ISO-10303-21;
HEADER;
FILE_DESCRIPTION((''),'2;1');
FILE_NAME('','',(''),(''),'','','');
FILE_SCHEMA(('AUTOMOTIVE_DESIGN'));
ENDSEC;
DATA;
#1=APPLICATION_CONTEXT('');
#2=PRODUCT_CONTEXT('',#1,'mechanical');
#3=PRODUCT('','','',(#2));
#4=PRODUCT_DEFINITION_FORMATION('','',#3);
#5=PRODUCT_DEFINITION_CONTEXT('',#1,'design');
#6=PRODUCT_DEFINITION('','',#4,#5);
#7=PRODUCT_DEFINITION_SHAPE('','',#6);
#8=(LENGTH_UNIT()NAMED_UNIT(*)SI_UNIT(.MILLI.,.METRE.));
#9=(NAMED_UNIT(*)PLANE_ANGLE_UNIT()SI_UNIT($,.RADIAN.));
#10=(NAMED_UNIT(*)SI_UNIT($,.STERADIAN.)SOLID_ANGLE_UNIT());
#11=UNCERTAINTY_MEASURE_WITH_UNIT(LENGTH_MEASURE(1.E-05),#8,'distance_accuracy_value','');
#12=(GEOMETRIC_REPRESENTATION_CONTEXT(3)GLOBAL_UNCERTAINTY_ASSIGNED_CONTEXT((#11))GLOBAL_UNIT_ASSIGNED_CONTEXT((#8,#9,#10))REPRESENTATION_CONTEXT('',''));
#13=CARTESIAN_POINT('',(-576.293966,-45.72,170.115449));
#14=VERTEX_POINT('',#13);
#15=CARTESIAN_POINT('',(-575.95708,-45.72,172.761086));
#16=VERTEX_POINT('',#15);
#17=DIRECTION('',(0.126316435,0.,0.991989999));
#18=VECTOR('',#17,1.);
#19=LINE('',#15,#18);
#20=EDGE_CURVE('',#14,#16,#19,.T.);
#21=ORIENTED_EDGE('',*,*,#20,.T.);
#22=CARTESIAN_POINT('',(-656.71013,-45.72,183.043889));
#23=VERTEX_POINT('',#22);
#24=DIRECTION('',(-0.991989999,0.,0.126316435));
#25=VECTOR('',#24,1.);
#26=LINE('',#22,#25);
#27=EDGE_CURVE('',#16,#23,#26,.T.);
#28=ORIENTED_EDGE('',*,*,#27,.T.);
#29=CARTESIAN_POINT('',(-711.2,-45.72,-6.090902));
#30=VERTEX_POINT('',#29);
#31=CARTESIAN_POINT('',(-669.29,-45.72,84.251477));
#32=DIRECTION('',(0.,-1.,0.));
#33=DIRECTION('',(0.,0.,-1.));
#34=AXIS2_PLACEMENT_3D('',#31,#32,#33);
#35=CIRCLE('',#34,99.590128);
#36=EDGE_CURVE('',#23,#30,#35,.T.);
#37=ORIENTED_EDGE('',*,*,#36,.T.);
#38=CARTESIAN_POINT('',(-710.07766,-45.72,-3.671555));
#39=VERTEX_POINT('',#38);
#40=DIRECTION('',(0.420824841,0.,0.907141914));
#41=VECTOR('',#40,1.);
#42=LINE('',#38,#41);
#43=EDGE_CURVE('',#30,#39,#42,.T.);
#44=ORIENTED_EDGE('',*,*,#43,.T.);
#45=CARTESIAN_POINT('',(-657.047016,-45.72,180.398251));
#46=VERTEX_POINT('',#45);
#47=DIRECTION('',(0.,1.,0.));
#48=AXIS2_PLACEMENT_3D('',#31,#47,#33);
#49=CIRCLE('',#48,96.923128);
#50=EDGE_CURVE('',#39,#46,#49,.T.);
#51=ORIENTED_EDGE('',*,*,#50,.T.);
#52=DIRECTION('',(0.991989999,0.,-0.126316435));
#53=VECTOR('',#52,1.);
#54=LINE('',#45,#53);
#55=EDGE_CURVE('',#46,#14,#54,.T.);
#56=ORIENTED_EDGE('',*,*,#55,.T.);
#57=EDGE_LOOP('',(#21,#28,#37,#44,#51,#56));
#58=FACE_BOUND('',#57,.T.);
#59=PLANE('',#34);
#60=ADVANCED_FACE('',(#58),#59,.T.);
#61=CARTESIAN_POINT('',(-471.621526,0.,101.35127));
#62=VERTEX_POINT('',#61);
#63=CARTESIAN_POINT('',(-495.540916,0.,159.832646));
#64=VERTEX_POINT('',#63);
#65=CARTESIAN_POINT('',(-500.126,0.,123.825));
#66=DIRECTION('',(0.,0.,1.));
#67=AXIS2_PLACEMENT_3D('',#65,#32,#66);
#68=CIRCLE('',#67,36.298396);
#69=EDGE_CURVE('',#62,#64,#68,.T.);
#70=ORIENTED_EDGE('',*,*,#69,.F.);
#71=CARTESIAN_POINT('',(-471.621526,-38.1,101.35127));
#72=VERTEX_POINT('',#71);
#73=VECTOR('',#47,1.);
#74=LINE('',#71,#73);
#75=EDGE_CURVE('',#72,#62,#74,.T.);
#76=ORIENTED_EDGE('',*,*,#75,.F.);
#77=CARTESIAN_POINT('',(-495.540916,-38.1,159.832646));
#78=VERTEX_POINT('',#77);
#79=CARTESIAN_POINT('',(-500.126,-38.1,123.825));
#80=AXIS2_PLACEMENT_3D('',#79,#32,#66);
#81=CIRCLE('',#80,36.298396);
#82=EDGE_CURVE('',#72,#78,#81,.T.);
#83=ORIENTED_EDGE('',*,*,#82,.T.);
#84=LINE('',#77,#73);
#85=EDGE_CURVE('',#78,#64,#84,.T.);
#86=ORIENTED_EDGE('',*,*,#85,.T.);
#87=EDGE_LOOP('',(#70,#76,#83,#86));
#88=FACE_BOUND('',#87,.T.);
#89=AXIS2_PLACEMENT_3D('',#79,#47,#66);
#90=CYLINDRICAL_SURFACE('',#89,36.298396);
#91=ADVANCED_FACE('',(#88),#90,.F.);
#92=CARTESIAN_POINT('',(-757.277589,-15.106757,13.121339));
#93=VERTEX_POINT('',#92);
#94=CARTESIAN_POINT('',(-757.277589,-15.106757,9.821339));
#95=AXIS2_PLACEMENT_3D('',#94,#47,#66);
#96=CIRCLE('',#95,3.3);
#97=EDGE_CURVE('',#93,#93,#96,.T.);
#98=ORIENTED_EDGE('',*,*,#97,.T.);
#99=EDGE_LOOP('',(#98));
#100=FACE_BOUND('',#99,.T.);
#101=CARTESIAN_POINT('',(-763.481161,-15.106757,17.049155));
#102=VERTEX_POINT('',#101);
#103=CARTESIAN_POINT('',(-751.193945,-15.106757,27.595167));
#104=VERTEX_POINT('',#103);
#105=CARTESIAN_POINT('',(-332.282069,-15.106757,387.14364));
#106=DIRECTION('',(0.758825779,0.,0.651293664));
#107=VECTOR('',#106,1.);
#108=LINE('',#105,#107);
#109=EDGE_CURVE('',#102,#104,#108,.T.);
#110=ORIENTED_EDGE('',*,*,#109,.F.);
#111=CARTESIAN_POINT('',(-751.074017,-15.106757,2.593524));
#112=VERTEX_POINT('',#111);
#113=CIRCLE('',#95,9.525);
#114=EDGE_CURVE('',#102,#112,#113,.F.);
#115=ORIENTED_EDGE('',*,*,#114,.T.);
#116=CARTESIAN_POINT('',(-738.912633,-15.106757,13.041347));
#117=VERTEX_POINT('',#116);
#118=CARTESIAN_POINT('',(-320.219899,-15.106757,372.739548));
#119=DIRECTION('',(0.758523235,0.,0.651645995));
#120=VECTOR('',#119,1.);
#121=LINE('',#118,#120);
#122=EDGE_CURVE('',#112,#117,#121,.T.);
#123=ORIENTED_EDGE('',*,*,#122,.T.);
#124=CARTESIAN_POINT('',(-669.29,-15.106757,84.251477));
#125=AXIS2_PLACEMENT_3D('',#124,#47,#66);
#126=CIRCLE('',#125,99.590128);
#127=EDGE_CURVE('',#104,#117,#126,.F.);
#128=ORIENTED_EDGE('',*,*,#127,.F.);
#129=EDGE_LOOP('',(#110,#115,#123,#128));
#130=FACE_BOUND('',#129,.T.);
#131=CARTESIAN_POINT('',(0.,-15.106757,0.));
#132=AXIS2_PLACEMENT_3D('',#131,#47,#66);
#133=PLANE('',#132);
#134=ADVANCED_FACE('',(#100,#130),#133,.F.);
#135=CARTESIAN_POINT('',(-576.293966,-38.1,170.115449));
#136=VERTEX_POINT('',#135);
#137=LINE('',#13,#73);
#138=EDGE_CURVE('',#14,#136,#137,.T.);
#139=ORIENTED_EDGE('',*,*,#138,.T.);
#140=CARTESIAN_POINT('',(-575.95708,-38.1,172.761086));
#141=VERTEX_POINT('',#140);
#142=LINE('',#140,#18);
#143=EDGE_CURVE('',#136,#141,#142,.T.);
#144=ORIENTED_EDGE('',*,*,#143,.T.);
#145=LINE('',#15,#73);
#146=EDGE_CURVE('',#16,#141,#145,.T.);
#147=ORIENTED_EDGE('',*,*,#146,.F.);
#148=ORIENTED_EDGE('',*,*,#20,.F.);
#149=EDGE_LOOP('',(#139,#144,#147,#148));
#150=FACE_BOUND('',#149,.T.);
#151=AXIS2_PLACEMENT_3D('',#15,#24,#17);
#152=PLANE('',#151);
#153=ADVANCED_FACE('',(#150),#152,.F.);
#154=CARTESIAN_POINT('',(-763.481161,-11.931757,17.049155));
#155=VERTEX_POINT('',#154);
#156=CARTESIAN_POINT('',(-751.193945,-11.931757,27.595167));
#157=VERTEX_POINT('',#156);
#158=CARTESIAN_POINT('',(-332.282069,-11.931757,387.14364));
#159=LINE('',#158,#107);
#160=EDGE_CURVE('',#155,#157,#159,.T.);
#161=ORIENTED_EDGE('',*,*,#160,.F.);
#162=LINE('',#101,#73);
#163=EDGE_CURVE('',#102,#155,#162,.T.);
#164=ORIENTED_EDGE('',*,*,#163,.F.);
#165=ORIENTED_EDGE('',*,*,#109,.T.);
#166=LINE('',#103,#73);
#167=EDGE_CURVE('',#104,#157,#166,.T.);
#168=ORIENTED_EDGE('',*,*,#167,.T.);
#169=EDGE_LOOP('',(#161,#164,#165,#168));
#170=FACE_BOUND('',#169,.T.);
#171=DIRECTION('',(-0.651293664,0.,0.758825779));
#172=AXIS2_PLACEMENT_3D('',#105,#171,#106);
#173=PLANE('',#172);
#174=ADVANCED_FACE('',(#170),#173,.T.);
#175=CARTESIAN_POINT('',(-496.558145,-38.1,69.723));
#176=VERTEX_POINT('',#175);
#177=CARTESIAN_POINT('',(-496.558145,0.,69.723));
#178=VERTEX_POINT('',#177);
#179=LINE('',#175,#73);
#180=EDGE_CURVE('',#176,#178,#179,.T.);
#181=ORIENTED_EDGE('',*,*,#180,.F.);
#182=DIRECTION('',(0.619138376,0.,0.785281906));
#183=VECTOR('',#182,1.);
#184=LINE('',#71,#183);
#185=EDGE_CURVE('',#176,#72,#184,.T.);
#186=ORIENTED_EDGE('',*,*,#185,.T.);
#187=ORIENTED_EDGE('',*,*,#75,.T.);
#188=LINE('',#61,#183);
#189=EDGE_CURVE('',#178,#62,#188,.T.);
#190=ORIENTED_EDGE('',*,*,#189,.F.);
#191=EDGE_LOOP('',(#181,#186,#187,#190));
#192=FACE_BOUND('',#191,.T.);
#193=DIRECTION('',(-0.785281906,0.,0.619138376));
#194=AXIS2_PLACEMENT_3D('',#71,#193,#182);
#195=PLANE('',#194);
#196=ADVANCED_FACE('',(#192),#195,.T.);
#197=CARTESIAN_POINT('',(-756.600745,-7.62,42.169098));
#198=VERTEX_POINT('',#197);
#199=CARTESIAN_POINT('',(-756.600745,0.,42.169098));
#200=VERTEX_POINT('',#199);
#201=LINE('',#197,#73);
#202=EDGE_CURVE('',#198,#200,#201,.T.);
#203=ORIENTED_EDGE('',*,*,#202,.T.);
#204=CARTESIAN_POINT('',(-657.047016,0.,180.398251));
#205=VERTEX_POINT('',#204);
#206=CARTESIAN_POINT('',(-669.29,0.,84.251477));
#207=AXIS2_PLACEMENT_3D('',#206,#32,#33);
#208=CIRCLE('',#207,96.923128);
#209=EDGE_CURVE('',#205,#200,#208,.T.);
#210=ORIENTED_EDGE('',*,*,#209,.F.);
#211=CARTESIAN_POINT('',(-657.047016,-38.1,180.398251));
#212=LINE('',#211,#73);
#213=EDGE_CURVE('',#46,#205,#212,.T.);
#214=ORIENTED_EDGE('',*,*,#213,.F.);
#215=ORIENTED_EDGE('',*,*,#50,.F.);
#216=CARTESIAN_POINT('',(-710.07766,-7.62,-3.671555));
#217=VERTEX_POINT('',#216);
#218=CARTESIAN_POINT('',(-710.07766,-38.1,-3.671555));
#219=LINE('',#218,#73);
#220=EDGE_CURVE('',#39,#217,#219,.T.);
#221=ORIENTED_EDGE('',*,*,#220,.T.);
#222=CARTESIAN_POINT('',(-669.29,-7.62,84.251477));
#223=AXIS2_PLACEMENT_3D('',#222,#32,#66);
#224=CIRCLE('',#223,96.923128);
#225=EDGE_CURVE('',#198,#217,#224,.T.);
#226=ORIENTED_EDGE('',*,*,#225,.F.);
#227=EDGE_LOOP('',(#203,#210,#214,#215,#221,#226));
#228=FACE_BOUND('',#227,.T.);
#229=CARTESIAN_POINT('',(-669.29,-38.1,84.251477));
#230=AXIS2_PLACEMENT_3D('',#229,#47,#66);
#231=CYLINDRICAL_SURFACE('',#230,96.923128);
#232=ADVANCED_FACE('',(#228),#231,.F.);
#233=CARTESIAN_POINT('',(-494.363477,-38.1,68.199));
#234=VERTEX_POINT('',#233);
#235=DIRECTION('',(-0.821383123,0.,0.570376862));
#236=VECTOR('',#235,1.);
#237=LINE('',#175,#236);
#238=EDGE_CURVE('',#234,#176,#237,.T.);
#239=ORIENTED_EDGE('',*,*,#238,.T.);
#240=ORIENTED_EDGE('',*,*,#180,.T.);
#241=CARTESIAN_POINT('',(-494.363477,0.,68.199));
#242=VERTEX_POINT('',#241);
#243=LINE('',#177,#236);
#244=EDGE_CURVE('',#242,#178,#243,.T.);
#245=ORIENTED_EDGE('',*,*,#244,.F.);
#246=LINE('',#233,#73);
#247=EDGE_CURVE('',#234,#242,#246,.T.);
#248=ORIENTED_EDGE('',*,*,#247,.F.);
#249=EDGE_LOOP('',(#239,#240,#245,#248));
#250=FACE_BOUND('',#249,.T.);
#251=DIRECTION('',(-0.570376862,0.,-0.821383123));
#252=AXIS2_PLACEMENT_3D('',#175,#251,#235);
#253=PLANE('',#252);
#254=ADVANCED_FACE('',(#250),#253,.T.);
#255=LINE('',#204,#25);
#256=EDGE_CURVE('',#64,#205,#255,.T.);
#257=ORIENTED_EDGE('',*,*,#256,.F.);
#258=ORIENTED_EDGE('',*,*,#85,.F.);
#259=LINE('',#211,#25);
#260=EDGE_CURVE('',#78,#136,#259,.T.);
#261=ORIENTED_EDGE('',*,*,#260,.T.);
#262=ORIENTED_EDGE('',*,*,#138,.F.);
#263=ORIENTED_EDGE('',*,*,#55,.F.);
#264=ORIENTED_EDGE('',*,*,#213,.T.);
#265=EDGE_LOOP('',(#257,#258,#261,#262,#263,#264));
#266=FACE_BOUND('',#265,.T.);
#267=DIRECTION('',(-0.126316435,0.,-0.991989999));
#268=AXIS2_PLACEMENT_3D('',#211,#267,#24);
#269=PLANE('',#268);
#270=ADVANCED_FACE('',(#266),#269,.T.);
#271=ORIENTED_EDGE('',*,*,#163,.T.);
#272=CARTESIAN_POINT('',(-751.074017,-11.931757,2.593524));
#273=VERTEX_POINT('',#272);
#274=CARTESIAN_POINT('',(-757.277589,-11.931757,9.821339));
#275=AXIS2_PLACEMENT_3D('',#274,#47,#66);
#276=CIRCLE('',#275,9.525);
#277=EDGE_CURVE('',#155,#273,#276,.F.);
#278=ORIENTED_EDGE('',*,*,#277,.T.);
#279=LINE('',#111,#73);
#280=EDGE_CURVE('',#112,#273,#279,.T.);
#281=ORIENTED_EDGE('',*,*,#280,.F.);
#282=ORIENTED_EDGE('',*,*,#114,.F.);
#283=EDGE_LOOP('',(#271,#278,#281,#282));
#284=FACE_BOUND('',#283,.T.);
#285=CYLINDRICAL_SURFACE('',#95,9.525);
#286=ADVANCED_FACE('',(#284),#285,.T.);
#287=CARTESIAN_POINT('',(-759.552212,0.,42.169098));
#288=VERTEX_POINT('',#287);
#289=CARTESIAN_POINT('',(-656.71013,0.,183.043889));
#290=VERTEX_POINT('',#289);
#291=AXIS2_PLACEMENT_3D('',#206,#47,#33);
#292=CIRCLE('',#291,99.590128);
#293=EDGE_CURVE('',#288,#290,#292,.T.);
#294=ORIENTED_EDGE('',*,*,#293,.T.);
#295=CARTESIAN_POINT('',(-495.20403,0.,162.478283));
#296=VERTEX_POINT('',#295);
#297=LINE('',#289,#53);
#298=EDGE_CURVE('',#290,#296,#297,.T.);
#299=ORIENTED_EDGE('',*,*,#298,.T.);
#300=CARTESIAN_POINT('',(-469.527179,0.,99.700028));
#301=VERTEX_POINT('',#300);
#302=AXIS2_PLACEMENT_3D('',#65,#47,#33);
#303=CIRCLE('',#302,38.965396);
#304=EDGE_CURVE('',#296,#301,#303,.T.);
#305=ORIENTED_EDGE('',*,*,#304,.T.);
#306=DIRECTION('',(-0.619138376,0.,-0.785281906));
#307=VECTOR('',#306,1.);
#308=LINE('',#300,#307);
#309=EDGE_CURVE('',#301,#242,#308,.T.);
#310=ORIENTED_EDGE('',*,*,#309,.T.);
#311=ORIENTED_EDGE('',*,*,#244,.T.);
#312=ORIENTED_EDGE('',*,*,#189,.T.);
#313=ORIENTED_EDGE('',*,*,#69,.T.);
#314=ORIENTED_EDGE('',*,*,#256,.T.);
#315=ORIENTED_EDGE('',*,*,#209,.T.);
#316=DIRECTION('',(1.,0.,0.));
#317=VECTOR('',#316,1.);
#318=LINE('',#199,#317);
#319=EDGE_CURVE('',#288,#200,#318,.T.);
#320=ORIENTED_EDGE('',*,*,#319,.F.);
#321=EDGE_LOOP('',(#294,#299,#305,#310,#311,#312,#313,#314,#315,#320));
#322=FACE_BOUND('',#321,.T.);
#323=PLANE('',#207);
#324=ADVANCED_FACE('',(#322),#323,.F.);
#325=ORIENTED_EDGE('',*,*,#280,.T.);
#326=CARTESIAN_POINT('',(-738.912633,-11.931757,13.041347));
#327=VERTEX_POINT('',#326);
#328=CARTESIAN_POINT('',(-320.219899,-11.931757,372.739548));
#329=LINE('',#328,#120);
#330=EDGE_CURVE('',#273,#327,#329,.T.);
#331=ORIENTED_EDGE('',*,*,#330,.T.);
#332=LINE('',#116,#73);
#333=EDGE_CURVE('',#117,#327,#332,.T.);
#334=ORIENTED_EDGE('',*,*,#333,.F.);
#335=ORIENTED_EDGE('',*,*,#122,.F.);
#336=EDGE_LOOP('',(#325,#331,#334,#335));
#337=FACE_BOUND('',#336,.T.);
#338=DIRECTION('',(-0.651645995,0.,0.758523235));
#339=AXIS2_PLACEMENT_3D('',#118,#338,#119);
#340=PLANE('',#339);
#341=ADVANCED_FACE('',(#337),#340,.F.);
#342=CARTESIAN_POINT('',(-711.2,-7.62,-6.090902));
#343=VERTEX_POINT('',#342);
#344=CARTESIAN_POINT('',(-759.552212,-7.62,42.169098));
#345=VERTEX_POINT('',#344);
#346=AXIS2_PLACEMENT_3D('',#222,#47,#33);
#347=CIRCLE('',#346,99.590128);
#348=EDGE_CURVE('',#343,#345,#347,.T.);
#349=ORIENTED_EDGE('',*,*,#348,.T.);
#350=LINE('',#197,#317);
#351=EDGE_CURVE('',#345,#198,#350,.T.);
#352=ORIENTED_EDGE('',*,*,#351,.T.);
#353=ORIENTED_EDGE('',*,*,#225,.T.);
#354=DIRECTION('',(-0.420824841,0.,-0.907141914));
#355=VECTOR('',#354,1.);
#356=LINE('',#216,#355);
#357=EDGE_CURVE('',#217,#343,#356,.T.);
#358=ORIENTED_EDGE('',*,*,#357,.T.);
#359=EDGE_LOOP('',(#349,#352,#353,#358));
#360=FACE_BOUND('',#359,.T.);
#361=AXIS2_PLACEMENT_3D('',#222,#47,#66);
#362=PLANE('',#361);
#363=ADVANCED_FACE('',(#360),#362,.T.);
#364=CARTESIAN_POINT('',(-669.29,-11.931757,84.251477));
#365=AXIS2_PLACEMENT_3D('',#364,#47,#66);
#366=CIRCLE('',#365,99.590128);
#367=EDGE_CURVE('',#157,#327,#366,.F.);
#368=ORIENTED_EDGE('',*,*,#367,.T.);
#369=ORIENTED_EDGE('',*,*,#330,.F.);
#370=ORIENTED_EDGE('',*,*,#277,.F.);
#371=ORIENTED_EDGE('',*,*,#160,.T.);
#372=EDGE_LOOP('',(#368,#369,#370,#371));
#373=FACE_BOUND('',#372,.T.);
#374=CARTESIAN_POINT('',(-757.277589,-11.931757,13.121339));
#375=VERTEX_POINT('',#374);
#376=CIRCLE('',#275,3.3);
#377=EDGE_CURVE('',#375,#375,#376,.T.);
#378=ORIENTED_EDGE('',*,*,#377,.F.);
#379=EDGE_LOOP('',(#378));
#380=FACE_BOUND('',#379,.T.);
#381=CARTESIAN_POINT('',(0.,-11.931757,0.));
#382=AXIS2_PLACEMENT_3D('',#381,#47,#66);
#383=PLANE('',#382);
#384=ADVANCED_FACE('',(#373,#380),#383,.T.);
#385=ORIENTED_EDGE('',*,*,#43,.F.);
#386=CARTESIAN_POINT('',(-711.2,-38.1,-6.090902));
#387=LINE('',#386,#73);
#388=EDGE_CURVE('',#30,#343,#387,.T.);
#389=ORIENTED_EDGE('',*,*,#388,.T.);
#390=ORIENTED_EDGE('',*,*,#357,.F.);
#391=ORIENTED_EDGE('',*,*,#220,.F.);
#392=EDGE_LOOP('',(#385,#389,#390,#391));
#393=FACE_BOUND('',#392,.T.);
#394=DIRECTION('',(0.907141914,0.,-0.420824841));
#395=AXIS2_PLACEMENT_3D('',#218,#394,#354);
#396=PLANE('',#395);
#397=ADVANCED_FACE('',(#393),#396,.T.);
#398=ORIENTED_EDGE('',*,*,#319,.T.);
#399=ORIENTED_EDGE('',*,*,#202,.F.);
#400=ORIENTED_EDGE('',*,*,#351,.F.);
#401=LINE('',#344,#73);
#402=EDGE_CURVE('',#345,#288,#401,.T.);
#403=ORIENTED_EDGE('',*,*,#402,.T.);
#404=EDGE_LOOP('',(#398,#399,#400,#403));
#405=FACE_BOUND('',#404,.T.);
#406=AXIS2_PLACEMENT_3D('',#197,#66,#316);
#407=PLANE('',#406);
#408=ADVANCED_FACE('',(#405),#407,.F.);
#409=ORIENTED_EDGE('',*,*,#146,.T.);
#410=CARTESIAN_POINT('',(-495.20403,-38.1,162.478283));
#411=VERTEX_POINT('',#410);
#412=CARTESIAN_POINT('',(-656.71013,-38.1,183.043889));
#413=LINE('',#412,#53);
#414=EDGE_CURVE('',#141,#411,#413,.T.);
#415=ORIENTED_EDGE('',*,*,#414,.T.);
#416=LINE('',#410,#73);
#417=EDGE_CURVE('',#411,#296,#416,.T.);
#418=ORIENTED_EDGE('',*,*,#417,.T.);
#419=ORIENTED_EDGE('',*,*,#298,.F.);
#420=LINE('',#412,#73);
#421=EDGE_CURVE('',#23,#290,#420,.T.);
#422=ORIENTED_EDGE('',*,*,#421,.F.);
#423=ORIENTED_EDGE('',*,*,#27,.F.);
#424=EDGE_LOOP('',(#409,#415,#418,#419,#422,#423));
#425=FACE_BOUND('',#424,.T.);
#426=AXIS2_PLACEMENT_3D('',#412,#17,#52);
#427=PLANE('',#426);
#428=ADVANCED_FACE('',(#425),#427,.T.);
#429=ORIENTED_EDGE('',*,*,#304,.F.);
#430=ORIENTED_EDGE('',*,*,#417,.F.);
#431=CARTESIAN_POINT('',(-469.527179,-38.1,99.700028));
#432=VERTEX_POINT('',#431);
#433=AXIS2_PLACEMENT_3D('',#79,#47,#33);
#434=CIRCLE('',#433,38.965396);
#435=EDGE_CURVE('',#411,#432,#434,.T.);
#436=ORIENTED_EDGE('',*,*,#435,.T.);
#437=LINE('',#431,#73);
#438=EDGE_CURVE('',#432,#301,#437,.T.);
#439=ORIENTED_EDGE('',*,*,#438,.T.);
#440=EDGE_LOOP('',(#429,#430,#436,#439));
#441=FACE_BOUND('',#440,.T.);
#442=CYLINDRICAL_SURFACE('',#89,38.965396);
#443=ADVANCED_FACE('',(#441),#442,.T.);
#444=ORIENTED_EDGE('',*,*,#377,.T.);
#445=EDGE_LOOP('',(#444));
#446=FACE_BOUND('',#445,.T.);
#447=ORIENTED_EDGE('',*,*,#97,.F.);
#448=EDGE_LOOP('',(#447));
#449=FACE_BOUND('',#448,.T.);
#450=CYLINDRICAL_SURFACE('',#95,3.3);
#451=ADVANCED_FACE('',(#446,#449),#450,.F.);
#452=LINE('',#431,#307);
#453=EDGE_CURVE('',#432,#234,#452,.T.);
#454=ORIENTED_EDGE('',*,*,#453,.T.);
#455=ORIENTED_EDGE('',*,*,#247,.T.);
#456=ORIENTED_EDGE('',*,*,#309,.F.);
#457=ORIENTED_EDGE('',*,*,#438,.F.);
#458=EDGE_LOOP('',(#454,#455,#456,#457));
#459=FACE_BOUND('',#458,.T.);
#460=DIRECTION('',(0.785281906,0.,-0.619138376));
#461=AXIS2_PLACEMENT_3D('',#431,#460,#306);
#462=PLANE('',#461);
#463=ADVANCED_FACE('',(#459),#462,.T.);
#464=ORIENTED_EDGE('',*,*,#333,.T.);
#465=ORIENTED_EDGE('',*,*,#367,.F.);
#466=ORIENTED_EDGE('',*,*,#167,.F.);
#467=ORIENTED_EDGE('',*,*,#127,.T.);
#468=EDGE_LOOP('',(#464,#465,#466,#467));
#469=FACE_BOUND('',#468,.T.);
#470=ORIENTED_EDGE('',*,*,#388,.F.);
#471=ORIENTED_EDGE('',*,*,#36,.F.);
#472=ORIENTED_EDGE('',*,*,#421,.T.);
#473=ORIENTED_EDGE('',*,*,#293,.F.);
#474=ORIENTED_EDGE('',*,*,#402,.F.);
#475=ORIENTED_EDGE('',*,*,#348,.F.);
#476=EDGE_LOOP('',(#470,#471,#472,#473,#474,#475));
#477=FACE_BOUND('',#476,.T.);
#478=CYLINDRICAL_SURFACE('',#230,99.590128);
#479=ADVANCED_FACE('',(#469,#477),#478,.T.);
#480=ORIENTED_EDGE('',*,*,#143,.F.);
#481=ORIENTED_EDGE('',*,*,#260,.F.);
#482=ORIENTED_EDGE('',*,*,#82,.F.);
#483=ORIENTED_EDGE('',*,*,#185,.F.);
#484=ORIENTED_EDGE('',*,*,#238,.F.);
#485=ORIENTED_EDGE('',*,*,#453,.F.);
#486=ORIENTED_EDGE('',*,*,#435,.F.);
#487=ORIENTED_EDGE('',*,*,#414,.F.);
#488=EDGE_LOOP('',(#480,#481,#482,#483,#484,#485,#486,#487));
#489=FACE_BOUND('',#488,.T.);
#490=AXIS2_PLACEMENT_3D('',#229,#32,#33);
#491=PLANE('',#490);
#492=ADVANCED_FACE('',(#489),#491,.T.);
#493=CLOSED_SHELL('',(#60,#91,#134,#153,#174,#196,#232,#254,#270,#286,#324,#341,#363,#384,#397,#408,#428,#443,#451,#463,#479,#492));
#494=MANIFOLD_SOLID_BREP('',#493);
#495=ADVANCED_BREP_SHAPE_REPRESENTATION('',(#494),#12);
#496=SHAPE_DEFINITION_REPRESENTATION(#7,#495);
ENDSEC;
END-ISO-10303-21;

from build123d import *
from build123d.topology import SkipClean

# Parameters (mm, degrees)
BASE_FLANGE1_DEPTH  = 38.1
CUT_EXTRUDE1_DEPTH  = 7.62
SKETCH9_R           = 3.3
BOSS_EXTRUDE1_DEPTH = 3.175
BOSS_EXTRUDE2_DEPTH = 7.62


# Sheet-metal steps are written as plain solids
with BuildPart() as part:
    # Sketch1 → Base-Flange1 (new body)
    with BuildSketch(Plane(origin=(0, 0, 0), x_dir=(1, 0, 0), z_dir=(0, 1, 0))):
        with BuildLine():
            Line((-657.047015903, -180.398251424), (-495.540915967, -159.83264605))
            ThreePointArc((-495.540915967, -159.83264605), (-466.529161595, -137.56639807), (-471.621526187, -101.351269827))
            Line((-471.621526187, -101.351269827), (-496.558145126, -69.722999952))
            Line((-496.558145126, -69.722999952), (-494.363477067, -68.198999952))
            Line((-494.363477067, -68.198999952), (-469.527179345, -99.700027778))
            ThreePointArc((-469.527179345, -99.700027778), (-464.060656724, -138.576037958), (-495.204030033, -162.478283377))
            Line((-495.204030033, -162.478283377), (-656.710129969, -183.043888751))
            ThreePointArc((-656.710129969, -183.043888751), (-764.987734735, -111.822063922), (-711.2, 6.090902363))
            Line((-711.2, 6.090902363), (-710.077660148, 3.671554877))
            ThreePointArc((-710.077660148, 3.671554877), (-762.424972114, -111.083730158), (-657.047015903, -180.398251424))
        make_face()
    extrude(amount=-BASE_FLANGE1_DEPTH)

    # Sketch7 → Cut-Extrude1 (cut)
    with BuildSketch(Plane(origin=(-711.2, 0, -6.090902363), x_dir=(1, 0, 0), z_dir=(0, 1, 0))):
        with BuildLine():
            Line((1.122339852, -2.419347486), (0, 0))
            ThreePointArc((0, 0), (-28.443609249, -19.854342865), (-48.352212426, -48.26))
            Line((-48.352212426, -48.26), (-45.400744677, -48.26))
            ThreePointArc((-45.400744677, -48.26), (-26.116771828, -21.302890058), (1.122339852, -2.419347486))
        make_face()
    extrude(amount=-CUT_EXTRUDE1_DEPTH, mode=Mode.SUBTRACT)

    # Sketch9 → Boss-Extrude1 (add)
    with BuildSketch(Plane(origin=(0, -11.93175668, 0), x_dir=(1, 0, 0), z_dir=(0, 1, 0))):
        with BuildLine():
            ThreePointArc((-751.074016673, -2.593523568), (-764.50540437, -3.617766971), (-763.481160967, -17.049154667))
            Line((-763.481160967, -17.049154667), (-751.193944793, -27.595167013))
            ThreePointArc((-751.193944793, -27.595167013), (-745.401952839, -20.024035331), (-738.912633033, -13.041347154))
            Line((-738.912633033, -13.041347154), (-751.074016673, -2.593523568))
        make_face()
        with Locations(Location((-757.27758882, -9.821339117, 0), (0, 0, 270))):
            Circle(SKETCH9_R, mode=Mode.SUBTRACT)
    extrude(amount=-BOSS_EXTRUDE1_DEPTH)

    # Sketch10 → Boss-Extrude2 (add)
    with SkipClean():  # the faces are left unmerged after this step: merging them gives an invalid solid
        with BuildSketch(Plane.XZ.offset(38.1)):
            with BuildLine():
                Line((-710.077660148, -3.671554877), (-711.2, -6.090902363))
                ThreePointArc((-711.2, -6.090902363), (-764.987734735, 111.822063922), (-656.710129969, 183.043888751))
                Line((-656.710129969, 183.043888751), (-575.957080001, 172.761086064))
                Line((-575.957080001, 172.761086064), (-576.293965935, 170.115448737))
                Line((-576.293965935, 170.115448737), (-657.047015903, 180.398251424))
                ThreePointArc((-657.047015903, 180.398251424), (-762.424972114, 111.083730158), (-710.077660148, -3.671554877))
            make_face()
        extrude(amount=BOSS_EXTRUDE2_DEPTH)


solid = part.part
